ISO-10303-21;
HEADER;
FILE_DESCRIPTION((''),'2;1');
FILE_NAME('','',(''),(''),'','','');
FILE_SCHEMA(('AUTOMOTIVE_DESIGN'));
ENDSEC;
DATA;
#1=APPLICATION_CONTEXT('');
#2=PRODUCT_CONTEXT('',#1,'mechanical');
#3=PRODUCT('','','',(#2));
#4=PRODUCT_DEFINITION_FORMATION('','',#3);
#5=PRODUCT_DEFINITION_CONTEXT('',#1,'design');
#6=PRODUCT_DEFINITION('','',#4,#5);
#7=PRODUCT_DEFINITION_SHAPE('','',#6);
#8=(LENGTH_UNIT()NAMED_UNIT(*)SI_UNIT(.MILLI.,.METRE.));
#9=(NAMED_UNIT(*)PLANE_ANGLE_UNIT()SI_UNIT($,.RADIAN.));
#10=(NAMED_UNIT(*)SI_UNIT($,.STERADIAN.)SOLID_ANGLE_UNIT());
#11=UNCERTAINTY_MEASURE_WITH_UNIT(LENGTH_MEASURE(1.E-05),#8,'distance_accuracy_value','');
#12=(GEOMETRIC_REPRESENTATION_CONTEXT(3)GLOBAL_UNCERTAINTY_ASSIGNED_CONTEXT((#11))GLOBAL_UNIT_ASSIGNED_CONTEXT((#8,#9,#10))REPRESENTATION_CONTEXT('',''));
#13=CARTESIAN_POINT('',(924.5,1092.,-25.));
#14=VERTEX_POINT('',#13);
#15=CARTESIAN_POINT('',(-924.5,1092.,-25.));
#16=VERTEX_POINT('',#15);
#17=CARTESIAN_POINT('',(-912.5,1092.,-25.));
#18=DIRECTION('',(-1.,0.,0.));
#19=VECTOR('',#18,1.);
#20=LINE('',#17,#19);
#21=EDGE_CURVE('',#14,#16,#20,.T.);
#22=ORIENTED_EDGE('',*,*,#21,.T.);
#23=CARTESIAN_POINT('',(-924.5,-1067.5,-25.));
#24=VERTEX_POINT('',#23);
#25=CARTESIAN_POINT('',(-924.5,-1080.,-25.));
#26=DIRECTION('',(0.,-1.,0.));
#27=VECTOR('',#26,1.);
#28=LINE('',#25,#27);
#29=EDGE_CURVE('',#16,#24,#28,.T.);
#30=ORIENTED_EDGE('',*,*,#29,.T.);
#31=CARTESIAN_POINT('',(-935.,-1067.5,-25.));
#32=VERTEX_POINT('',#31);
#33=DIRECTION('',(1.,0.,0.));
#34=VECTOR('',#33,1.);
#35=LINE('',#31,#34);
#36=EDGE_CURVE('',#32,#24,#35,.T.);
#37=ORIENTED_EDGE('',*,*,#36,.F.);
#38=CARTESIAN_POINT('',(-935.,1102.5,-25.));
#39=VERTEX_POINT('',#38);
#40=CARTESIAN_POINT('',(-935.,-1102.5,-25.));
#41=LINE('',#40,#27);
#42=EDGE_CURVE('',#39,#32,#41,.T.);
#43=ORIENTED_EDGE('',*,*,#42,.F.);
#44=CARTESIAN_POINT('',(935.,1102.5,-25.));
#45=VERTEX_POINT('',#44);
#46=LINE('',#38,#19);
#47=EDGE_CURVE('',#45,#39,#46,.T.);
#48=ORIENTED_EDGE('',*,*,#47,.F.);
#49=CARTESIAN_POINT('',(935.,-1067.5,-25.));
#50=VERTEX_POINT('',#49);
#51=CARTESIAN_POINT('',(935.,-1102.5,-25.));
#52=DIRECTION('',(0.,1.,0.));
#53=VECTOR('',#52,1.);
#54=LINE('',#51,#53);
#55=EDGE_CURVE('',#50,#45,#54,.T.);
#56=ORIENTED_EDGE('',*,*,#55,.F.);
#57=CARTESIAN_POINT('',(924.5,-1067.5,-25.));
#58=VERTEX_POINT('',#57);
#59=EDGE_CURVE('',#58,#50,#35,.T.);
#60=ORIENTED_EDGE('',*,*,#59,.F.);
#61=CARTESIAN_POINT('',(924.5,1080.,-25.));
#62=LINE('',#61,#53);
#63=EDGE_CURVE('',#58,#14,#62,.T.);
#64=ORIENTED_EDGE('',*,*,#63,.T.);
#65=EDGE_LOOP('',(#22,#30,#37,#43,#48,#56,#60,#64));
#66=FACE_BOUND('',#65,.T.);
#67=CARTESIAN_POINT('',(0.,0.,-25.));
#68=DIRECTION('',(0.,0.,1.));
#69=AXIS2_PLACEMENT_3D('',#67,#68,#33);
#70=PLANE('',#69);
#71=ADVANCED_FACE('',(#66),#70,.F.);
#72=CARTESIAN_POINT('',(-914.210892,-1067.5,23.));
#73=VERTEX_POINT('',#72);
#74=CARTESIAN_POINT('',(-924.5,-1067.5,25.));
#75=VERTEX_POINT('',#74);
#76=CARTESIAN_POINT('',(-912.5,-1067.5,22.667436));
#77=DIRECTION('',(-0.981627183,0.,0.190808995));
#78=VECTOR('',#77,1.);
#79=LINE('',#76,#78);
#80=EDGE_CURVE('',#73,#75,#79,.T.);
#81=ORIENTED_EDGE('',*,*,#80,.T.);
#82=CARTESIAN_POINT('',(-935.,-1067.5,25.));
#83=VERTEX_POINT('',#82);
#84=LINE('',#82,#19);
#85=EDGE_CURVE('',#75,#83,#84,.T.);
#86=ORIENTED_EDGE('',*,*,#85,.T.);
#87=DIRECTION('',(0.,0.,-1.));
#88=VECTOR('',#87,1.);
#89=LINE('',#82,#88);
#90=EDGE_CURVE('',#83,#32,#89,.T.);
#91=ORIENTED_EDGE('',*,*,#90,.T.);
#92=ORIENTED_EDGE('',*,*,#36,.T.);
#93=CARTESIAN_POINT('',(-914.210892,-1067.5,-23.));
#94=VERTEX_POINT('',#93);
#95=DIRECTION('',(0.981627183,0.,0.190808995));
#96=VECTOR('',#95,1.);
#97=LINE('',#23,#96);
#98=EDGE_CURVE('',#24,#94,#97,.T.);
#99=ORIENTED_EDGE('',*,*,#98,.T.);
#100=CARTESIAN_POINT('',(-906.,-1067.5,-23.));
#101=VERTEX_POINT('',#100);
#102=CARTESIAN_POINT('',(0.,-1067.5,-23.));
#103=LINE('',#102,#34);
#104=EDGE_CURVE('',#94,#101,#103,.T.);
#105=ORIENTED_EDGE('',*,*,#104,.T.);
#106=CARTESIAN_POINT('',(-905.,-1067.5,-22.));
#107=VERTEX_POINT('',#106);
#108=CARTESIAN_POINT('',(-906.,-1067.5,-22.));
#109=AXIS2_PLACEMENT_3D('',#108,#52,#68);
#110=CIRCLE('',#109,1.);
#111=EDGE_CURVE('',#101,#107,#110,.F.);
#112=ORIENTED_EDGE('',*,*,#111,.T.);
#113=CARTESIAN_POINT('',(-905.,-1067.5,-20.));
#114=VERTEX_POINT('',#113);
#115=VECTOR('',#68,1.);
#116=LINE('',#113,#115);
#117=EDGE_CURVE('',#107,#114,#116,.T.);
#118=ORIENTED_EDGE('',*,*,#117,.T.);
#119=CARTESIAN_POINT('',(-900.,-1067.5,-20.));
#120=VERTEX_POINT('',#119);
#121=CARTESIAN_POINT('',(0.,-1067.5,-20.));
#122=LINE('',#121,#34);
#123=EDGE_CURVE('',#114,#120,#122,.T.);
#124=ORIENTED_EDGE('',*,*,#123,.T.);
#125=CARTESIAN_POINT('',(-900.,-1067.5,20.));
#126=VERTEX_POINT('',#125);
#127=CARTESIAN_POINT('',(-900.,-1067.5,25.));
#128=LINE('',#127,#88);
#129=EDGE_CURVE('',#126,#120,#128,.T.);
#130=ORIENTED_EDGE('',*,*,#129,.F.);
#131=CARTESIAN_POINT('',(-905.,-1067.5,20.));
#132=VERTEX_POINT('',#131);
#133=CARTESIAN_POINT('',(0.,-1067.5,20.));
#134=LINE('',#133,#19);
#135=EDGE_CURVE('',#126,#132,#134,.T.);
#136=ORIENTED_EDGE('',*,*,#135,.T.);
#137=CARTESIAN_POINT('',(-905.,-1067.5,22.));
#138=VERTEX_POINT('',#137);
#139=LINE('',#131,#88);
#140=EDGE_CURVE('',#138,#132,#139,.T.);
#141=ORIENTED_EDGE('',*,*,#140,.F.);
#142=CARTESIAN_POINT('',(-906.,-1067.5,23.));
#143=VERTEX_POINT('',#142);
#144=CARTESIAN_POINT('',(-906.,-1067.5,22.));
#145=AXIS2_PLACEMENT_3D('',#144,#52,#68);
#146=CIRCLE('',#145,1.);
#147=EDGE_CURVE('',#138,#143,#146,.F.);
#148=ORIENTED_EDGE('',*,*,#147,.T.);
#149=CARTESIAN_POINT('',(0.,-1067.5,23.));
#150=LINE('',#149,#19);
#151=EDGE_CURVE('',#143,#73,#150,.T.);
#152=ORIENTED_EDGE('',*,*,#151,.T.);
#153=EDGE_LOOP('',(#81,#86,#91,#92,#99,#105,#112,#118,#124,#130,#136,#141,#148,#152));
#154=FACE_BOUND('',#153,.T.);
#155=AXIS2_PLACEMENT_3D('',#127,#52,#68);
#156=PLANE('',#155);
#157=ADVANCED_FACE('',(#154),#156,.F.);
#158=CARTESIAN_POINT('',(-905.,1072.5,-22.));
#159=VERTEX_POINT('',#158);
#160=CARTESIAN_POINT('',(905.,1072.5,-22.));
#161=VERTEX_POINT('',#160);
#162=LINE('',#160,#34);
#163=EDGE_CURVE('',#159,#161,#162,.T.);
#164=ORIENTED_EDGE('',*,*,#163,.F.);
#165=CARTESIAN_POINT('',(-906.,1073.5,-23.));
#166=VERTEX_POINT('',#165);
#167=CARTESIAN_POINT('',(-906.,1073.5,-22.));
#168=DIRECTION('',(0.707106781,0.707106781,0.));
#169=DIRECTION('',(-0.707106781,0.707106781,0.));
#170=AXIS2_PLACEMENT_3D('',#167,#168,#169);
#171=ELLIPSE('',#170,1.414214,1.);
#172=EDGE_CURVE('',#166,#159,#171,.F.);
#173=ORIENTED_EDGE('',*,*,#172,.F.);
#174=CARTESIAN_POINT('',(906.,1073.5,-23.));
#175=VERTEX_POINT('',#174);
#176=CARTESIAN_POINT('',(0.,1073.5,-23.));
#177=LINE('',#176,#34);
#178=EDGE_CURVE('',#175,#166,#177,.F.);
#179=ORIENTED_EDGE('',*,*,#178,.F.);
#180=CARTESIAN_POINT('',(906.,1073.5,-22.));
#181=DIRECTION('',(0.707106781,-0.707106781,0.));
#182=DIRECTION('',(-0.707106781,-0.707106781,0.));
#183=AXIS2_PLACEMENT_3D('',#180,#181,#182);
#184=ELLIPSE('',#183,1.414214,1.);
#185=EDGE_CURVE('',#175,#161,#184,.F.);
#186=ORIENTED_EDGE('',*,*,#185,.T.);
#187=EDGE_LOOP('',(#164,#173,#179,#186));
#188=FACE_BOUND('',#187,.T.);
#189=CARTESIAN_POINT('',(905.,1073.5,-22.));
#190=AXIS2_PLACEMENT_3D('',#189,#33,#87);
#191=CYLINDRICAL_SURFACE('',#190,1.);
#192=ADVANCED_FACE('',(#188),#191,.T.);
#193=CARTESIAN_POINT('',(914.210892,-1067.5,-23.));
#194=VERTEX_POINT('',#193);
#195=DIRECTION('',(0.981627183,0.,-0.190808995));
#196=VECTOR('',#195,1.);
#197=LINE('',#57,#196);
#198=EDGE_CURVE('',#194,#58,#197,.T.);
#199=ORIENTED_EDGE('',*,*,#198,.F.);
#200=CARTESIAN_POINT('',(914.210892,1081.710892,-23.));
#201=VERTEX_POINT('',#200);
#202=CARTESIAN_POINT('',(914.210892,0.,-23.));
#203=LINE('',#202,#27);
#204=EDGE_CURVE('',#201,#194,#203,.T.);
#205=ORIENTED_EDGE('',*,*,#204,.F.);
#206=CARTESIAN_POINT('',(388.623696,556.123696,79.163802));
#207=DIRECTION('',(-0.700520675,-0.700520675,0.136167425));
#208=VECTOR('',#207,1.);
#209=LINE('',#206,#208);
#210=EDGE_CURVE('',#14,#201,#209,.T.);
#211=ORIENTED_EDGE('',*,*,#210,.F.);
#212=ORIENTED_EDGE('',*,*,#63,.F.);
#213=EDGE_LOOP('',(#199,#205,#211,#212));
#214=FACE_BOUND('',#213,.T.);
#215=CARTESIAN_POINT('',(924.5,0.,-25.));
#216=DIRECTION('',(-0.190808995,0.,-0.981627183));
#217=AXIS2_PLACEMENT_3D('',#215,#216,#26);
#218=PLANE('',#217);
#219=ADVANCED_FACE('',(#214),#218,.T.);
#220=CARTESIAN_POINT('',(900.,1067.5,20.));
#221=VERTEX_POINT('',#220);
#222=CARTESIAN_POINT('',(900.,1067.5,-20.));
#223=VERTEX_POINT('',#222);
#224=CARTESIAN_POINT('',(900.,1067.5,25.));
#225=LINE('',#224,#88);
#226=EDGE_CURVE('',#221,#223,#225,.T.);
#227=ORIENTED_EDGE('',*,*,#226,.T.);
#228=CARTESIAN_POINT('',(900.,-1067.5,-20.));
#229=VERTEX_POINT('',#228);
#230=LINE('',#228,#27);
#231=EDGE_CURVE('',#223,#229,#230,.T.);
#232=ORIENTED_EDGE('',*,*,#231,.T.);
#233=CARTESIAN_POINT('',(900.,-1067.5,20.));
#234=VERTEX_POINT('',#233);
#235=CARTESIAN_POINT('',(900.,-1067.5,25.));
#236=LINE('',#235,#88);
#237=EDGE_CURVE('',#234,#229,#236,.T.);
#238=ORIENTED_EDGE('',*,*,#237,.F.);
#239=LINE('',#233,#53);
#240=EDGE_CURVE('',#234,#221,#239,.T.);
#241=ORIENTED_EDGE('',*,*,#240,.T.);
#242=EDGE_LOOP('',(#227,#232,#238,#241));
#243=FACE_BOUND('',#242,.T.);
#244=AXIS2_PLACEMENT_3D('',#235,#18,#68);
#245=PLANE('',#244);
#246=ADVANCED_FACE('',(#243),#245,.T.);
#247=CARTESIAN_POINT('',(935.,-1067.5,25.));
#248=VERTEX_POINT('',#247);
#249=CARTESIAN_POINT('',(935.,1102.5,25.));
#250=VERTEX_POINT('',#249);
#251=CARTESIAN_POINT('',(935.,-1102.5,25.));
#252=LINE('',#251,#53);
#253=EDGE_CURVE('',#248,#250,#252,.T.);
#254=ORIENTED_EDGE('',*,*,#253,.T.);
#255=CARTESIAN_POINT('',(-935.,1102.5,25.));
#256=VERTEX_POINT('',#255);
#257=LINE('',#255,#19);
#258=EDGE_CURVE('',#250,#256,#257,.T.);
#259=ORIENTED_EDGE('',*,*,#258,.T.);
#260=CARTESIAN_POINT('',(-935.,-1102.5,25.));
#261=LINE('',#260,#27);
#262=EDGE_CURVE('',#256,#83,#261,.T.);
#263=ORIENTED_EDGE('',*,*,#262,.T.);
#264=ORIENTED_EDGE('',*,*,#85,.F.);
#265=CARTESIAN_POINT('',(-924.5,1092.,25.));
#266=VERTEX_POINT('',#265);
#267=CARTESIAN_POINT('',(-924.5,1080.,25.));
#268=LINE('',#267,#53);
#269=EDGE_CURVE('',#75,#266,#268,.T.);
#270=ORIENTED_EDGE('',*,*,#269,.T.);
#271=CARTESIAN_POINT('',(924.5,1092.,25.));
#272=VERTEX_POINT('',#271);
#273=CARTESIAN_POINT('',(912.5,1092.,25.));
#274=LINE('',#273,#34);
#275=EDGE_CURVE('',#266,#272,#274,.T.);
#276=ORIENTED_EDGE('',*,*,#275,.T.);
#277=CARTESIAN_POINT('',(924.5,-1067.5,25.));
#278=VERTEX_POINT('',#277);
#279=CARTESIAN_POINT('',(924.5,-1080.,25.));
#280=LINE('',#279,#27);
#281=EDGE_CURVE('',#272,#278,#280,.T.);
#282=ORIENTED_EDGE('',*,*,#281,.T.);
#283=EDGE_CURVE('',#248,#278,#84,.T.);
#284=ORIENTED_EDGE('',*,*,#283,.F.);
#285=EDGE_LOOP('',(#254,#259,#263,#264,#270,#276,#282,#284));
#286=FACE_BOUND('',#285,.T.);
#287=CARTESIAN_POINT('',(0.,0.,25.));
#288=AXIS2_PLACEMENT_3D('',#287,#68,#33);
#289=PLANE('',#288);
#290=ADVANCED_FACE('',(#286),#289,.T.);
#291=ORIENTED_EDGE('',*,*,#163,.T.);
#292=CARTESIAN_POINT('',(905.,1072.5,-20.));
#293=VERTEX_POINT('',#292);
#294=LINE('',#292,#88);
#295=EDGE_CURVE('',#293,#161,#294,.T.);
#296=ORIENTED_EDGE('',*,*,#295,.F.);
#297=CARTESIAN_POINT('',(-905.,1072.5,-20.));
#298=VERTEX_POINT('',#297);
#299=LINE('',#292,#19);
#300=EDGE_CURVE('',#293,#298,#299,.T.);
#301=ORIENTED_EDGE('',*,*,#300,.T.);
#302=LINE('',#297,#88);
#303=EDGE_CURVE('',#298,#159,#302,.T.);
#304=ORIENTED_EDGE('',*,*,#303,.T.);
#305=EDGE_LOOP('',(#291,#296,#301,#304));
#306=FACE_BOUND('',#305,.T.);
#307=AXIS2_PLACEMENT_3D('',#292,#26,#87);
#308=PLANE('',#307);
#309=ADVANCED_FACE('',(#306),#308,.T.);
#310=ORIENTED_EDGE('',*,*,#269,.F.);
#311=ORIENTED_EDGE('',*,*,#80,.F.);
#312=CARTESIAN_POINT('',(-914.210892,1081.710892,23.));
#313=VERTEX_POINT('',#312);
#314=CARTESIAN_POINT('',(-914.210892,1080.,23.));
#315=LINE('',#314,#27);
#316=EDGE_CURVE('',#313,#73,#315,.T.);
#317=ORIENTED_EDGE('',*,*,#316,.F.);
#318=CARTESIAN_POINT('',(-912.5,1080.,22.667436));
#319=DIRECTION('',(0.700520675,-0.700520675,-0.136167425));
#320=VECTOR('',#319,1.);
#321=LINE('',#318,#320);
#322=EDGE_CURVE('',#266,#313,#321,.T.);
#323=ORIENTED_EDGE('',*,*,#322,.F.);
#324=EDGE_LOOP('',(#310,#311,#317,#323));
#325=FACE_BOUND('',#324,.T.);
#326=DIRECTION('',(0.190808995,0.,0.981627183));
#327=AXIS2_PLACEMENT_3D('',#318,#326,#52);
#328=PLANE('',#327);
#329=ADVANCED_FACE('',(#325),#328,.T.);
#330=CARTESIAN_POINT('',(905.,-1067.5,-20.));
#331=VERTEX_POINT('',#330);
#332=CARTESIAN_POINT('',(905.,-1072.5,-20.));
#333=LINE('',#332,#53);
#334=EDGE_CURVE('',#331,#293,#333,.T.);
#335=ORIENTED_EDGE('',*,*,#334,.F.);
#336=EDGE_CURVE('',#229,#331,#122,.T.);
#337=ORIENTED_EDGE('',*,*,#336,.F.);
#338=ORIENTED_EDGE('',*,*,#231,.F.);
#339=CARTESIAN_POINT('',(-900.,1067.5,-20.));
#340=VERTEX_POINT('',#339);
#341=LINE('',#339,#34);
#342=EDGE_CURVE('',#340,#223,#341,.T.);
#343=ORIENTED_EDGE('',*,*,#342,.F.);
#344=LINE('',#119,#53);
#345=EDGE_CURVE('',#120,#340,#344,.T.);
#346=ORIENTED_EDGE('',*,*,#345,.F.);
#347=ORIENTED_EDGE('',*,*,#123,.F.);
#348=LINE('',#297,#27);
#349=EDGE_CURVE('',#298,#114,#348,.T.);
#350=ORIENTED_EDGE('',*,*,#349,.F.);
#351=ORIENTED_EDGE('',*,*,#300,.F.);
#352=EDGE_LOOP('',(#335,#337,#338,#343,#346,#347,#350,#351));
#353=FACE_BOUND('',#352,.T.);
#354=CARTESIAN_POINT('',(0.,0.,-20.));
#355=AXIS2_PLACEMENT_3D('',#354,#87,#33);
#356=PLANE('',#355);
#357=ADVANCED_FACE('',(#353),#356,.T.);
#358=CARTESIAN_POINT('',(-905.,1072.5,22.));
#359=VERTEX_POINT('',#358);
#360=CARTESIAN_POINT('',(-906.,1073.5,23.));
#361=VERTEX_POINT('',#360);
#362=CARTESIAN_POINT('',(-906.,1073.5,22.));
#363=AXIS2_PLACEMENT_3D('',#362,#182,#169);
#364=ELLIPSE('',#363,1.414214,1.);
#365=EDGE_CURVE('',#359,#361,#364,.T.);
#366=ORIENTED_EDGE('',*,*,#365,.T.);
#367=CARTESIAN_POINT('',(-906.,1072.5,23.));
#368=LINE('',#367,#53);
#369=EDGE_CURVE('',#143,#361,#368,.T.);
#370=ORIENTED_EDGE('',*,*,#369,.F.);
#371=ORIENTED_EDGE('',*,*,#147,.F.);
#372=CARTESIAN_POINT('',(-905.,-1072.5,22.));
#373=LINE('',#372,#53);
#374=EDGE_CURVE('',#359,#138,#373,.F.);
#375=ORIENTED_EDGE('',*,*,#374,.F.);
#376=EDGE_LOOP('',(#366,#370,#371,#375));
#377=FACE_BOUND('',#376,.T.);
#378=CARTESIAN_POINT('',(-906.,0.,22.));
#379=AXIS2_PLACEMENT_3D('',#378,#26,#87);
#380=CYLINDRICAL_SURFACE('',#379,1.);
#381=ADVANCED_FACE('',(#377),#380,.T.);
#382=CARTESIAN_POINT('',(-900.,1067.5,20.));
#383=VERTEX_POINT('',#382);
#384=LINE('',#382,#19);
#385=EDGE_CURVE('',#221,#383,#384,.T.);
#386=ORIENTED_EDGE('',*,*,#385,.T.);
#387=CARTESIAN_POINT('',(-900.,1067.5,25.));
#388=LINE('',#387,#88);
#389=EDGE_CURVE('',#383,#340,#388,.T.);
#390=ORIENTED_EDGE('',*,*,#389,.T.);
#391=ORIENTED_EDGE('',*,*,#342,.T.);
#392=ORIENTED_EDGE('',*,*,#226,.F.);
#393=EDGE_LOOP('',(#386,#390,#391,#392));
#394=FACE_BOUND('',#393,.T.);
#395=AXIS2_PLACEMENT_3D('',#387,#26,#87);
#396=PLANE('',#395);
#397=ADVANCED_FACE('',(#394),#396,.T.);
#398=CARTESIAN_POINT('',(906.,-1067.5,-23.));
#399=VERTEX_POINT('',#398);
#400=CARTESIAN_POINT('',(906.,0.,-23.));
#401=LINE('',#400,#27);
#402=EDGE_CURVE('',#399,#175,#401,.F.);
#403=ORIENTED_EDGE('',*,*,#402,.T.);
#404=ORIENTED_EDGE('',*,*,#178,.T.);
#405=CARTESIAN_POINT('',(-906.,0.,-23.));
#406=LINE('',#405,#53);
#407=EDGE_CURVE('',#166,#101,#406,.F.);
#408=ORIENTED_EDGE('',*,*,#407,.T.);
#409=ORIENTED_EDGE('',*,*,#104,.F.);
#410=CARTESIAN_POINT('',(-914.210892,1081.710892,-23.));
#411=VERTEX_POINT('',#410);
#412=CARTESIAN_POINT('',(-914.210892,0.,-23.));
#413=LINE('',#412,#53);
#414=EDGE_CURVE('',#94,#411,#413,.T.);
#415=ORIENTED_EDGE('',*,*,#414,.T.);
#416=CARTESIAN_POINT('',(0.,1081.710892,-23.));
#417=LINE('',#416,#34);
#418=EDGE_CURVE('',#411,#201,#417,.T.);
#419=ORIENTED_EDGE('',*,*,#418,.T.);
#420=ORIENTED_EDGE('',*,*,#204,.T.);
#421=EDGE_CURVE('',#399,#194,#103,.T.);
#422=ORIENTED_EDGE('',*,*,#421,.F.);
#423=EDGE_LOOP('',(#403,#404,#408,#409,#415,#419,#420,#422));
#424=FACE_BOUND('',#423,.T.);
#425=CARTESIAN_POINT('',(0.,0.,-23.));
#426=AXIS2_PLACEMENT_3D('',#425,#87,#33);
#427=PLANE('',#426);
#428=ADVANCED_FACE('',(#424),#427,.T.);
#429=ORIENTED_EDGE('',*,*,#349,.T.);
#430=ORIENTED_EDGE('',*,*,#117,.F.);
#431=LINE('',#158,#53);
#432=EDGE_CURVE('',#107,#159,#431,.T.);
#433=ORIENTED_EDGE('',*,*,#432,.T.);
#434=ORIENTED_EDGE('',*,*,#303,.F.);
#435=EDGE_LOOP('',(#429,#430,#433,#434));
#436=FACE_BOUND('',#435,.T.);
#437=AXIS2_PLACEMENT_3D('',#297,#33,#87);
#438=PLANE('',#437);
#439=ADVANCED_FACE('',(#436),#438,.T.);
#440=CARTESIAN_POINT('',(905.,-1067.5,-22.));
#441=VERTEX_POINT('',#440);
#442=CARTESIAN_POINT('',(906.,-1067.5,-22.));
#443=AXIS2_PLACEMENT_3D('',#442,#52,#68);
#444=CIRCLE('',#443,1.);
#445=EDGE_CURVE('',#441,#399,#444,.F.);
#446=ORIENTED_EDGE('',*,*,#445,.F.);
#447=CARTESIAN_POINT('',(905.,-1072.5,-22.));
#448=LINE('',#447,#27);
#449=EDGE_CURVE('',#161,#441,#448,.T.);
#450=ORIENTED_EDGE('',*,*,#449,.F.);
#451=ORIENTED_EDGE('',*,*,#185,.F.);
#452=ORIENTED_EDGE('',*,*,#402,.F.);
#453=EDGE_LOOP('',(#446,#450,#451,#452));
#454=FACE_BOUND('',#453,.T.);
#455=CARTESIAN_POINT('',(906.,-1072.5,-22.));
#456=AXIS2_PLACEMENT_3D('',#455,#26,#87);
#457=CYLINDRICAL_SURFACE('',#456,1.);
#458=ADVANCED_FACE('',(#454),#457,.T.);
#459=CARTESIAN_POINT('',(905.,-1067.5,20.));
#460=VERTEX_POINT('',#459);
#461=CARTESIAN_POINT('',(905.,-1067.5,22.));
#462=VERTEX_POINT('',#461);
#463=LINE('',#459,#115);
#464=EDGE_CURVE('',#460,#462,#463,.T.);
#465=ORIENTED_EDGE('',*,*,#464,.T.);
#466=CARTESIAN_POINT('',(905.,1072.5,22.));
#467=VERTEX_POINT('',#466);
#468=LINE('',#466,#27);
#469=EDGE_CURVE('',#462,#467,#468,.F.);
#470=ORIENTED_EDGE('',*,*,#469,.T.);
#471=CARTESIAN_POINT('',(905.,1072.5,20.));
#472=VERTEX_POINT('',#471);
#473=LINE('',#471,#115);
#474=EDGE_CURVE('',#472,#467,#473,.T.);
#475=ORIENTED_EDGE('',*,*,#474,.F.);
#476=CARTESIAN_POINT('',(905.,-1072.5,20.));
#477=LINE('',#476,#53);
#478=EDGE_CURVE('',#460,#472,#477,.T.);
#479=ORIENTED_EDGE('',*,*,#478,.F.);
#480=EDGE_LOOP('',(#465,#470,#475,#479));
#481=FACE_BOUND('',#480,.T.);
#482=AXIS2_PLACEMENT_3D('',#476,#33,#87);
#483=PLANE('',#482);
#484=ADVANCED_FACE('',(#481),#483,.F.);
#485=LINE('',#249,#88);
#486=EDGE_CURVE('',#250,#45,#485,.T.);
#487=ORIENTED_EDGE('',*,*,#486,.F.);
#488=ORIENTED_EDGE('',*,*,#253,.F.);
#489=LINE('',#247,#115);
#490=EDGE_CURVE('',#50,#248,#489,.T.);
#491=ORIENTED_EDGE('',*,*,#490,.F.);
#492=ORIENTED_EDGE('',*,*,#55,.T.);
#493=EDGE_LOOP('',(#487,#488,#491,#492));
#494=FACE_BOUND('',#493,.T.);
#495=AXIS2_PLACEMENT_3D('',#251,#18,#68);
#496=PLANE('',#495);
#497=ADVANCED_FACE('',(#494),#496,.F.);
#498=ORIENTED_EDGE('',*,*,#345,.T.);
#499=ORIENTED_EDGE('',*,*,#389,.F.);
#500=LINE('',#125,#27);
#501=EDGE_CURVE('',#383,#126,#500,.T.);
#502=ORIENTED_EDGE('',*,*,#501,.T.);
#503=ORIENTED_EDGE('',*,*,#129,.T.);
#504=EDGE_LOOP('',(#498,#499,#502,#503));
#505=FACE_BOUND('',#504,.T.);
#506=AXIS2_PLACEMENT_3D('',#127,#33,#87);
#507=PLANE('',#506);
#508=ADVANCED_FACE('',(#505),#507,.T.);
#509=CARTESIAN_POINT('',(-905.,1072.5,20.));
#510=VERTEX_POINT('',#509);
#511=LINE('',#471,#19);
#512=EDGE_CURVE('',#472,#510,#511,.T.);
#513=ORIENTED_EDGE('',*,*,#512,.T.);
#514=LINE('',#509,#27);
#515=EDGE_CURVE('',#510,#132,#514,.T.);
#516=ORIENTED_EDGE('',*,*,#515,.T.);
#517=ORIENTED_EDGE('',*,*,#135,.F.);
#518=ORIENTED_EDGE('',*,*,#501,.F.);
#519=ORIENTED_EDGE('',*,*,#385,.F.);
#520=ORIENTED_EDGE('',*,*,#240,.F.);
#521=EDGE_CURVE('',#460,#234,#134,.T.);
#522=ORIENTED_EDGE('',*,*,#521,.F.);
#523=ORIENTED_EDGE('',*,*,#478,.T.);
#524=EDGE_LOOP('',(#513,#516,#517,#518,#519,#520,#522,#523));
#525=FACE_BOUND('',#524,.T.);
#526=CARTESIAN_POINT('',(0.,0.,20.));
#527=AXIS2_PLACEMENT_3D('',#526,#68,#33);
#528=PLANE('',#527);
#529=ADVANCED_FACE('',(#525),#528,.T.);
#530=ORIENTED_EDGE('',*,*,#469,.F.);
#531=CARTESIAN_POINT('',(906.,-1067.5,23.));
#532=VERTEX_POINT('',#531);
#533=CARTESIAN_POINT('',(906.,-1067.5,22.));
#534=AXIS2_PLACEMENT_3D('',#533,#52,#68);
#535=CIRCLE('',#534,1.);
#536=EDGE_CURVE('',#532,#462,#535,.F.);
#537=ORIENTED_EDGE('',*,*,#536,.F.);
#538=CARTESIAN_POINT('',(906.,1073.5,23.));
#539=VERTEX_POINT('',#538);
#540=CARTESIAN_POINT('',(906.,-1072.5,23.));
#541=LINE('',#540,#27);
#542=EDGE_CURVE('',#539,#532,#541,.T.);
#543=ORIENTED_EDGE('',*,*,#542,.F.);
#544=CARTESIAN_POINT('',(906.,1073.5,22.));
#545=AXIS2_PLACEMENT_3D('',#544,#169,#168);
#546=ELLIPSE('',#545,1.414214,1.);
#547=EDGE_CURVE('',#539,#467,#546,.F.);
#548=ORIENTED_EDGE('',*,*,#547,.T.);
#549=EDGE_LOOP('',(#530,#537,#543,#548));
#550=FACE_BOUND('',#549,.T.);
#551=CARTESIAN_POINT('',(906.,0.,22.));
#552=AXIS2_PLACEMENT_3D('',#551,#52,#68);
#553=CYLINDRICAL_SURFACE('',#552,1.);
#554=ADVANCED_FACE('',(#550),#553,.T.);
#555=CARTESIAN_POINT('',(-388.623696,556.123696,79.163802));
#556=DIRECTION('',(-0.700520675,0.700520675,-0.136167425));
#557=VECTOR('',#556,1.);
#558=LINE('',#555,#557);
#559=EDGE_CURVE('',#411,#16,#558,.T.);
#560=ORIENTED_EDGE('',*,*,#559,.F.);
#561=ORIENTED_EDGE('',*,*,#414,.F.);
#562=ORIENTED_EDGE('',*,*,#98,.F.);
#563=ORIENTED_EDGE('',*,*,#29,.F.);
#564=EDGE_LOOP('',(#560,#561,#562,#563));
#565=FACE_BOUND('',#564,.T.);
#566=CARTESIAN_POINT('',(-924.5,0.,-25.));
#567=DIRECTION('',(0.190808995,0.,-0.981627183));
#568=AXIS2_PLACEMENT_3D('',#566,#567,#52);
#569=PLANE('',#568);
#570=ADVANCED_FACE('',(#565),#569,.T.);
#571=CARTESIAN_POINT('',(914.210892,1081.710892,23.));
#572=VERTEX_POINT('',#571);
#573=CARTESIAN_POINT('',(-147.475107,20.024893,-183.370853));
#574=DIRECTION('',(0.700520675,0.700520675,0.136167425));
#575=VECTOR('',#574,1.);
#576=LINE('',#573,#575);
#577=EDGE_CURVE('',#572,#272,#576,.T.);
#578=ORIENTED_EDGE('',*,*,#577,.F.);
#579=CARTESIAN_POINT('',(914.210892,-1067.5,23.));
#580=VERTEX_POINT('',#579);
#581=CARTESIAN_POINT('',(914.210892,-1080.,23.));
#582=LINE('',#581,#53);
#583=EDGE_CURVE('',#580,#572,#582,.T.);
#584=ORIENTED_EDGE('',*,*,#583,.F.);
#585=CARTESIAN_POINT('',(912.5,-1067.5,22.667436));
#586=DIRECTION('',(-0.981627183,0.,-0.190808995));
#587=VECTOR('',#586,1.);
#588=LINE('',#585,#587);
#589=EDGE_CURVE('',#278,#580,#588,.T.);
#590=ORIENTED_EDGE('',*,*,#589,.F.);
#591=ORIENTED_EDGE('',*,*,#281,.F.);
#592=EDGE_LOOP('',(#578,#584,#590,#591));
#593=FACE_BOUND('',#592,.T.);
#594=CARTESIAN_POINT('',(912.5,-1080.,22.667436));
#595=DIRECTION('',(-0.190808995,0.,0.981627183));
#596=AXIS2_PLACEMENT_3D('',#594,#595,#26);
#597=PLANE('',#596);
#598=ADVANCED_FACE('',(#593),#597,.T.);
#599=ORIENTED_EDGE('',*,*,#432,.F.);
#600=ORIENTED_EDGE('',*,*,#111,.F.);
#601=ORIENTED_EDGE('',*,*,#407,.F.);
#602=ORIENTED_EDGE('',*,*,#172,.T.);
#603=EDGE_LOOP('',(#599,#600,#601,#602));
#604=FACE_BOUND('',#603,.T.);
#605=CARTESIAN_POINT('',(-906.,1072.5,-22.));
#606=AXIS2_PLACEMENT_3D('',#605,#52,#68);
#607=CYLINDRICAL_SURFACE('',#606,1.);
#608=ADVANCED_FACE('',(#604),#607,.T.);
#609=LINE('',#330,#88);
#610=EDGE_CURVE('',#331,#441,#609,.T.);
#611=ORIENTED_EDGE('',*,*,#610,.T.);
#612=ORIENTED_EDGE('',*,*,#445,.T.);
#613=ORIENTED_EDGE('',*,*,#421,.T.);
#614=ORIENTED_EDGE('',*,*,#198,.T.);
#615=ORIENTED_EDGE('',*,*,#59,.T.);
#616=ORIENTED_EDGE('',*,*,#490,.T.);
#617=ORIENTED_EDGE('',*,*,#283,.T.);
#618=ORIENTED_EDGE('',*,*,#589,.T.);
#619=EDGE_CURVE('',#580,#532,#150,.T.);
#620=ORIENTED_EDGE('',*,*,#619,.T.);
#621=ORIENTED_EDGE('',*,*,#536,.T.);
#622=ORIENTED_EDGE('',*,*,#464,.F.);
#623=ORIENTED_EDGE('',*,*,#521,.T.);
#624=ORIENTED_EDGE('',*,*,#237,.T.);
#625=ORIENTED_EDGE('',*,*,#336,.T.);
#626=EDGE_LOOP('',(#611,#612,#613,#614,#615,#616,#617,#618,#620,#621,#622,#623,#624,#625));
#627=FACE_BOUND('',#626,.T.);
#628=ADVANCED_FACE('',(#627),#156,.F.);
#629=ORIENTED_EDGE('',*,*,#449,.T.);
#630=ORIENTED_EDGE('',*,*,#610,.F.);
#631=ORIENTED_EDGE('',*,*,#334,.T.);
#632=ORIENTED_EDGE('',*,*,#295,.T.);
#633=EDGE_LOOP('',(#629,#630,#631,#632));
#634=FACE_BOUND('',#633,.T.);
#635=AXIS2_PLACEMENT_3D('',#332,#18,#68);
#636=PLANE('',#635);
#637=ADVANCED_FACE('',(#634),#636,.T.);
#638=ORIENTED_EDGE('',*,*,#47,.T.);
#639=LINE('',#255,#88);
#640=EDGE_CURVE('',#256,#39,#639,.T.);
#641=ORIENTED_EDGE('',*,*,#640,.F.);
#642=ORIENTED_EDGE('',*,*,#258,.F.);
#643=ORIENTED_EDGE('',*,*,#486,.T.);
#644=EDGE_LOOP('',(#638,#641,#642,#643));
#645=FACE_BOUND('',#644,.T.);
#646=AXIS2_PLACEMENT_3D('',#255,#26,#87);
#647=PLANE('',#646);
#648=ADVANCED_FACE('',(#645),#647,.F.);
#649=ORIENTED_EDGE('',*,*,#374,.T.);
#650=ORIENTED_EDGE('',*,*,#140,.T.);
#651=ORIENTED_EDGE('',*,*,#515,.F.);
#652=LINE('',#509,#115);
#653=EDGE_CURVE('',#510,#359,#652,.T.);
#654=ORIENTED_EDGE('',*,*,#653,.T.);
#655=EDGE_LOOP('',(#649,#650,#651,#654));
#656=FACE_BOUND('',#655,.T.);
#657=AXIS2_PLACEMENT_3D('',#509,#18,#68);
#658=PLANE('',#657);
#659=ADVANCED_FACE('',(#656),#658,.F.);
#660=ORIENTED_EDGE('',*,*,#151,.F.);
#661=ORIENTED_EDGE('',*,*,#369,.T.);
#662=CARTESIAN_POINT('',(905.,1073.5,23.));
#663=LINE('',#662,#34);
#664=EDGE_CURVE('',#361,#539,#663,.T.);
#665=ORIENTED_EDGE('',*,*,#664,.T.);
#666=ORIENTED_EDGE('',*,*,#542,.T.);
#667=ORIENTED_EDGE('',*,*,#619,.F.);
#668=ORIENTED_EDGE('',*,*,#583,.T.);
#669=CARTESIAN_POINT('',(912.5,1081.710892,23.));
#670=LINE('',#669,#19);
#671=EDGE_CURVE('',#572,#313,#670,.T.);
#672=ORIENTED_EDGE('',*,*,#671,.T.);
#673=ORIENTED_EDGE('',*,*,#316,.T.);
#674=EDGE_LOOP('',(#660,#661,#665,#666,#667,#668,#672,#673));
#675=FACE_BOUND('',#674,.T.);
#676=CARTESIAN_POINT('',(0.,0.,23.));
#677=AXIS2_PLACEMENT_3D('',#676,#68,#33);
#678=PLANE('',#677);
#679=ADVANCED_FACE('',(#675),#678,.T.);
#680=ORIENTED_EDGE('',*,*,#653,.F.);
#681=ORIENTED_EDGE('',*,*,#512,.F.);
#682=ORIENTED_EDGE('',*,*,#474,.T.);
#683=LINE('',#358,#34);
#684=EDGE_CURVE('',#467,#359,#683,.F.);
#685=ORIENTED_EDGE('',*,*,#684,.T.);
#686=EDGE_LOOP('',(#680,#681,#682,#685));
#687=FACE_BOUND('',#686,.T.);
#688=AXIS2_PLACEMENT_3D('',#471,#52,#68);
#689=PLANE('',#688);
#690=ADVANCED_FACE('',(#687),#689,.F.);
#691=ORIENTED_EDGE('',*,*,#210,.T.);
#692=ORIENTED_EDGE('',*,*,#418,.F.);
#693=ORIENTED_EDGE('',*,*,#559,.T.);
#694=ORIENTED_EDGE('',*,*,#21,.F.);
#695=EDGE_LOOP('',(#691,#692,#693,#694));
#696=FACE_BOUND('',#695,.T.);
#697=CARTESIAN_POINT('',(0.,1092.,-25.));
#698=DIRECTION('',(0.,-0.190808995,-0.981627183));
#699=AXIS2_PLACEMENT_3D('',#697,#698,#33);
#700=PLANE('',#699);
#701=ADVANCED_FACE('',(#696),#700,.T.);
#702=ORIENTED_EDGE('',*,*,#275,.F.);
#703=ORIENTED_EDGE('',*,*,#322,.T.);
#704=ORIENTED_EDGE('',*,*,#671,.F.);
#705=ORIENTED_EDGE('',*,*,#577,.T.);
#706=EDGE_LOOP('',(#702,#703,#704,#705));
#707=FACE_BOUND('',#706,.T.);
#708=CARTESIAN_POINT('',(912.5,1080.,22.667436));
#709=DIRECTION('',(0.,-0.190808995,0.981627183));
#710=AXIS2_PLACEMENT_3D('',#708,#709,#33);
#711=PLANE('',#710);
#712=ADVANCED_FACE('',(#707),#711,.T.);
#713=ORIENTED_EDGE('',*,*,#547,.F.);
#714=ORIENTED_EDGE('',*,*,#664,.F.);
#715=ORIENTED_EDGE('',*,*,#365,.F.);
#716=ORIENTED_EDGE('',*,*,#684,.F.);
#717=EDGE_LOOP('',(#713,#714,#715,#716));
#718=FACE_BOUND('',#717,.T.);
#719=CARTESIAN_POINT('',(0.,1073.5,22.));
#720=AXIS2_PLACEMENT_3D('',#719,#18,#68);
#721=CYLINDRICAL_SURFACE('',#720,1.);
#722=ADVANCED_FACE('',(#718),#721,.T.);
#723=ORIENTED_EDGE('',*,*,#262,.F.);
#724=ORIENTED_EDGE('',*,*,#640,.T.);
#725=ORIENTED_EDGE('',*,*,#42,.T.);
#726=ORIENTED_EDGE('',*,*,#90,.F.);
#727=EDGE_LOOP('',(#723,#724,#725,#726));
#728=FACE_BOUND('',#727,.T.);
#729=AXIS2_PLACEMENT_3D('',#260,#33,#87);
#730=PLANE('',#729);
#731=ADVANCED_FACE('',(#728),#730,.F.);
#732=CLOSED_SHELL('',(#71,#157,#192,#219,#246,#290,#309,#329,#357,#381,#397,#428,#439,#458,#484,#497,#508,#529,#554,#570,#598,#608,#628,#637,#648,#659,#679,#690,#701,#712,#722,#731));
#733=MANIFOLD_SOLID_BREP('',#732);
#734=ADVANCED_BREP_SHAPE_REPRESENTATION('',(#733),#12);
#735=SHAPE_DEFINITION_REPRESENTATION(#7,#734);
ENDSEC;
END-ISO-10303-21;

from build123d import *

# Parameters (mm, degrees)
SKETCH1_W           = 1870
SKETCH1_H           = 2205
SKETCH1_W_2         = 1800
SKETCH1_H_2         = 2135
BOSS_EXTRUDE1_DEPTH = 25
SKETCH2_W           = 1810
SKETCH2_H           = 2145
CUT_EXTRUDE2_DEPTH  = 5
SKETCH3_W           = 1825
SKETCH3_H           = 2160
CUT_EXTRUDE4_DEPTH  = 2
FILLET1_R           = 1
CHAMFER1_SIZE       = 2.33256371
CHAMFER1_SIZE_2     = 12
FILLET2_R           = 1
CHAMFER2_SIZE       = 2.33256371
CHAMFER2_SIZE_2     = 12
SKETCH5_W           = 1870
SKETCH5_H           = 50
CUT_EXTRUDE5_DEPTH  = 35


with BuildPart() as part:
    # Sketch1 → Boss-Extrude1 (new, symmetric)
    with BuildSketch(Plane.XY):
        Rectangle(SKETCH1_W, SKETCH1_H)
        Rectangle(SKETCH1_W_2, SKETCH1_H_2, mode=Mode.SUBTRACT)
    extrude(amount=BOSS_EXTRUDE1_DEPTH, both=True)

    # Sketch2 → Cut-Extrude2 (cut)
    with BuildSketch(Plane.XY.offset(25)):
        Rectangle(SKETCH2_W, SKETCH2_H)
    cut_extrude2 = extrude(amount=-CUT_EXTRUDE2_DEPTH, mode=Mode.SUBTRACT)

    # Sketch3 → Cut-Extrude4 (cut)
    with BuildSketch(Plane.XY.offset(25)):
        Rectangle(SKETCH3_W, SKETCH3_H)
    cut_extrude4 = extrude(amount=-CUT_EXTRUDE4_DEPTH, mode=Mode.SUBTRACT)

    # Fillet1
    fillet1_edges = [part.edges().sort_by_distance(p)[0] for p in [
        (0, -1072.5, 23),
        (-905, 0, 23),
        (0, 1072.5, 23),
        (905, 0, 23),
    ]]
    fillet(fillet1_edges, radius=FILLET1_R)

    # Chamfer1
    # the kernel refuses this chamfer: 12, 2.33256371 mm, written as the material it takes off along each edge
    with BuildSketch(Plane(origin=(912.5, 1080, 25), x_dir=(0, -0.1907987049962236, -0.9816291836389973), z_dir=(-1, 0, 0))) as chamfer1_piece_1_section:
        Polygon((CHAMFER1_SIZE * 0.981629183493, -CHAMFER1_SIZE * 0.190798704968), (-CHAMFER1_SIZE_2 * 0.190798704996, -CHAMFER1_SIZE_2 * 0.981629183639), (0, 0), align=None)
    chamfer1_piece_1 = extrude(amount=1825, mode=Mode.PRIVATE)
    chamfer1_piece_1 = split(chamfer1_piece_1, bisect_by=Plane(origin=(0, 1084.39239505, 23), z_dir=(0, 0, 1)), keep=Keep.TOP, mode=Mode.PRIVATE)
    add(chamfer1_piece_1, mode=Mode.SUBTRACT)
    with BuildSketch(Plane(origin=(912.5, -1080, 25), x_dir=(-0.1907987049962236, 0, -0.9816291836389973), z_dir=(0, 1, 0))) as chamfer1_piece_2_section:
        Polygon((CHAMFER1_SIZE * 0.981629183493, -CHAMFER1_SIZE * 0.190798704968), (-CHAMFER1_SIZE_2 * 0.190798704996, -CHAMFER1_SIZE_2 * 0.981629183639), (0, 0), align=None)
    chamfer1_piece_2 = extrude(amount=2160, mode=Mode.PRIVATE)
    chamfer1_piece_2 = split(chamfer1_piece_2, bisect_by=Plane(origin=(916.89239505, 0, 23), z_dir=(0, 0, 1)), keep=Keep.TOP, mode=Mode.PRIVATE)
    add(chamfer1_piece_2, mode=Mode.SUBTRACT)
    with BuildSketch(Plane(origin=(-912.5, -1080, 25), x_dir=(0, 0.1907987049962236, -0.9816291836389973), z_dir=(1, 0, 0))) as chamfer1_piece_3_section:
        Polygon((CHAMFER1_SIZE * 0.981629183493, -CHAMFER1_SIZE * 0.190798704968), (-CHAMFER1_SIZE_2 * 0.190798704996, -CHAMFER1_SIZE_2 * 0.981629183639), (0, 0), align=None)
    chamfer1_piece_3 = extrude(amount=1825, mode=Mode.PRIVATE)
    chamfer1_piece_3 = split(chamfer1_piece_3, bisect_by=Plane(origin=(0, -1084.39239505, 23), z_dir=(0, 0, 1)), keep=Keep.TOP, mode=Mode.PRIVATE)
    add(chamfer1_piece_3, mode=Mode.SUBTRACT)
    with BuildSketch(Plane(origin=(-912.5, 1080, 25), x_dir=(0.1907987049962236, 0, -0.9816291836389973), z_dir=(0, -1, 0))) as chamfer1_piece_4_section:
        Polygon((CHAMFER1_SIZE * 0.981629183493, -CHAMFER1_SIZE * 0.190798704968), (-CHAMFER1_SIZE_2 * 0.190798704996, -CHAMFER1_SIZE_2 * 0.981629183639), (0, 0), align=None)
    chamfer1_piece_4 = extrude(amount=2160, mode=Mode.PRIVATE)
    chamfer1_piece_4 = split(chamfer1_piece_4, bisect_by=Plane(origin=(-916.89239505, 0, 23), z_dir=(0, 0, 1)), keep=Keep.TOP, mode=Mode.PRIVATE)
    add(chamfer1_piece_4, mode=Mode.SUBTRACT)
    with BuildSketch(Plane(origin=(912.5, -1080, 25), x_dir=(-0.1907987049962236, 0, -0.9816291836389973), z_dir=(0, 1, 0))) as chamfer1_piece_5a_section:
        Polygon((CHAMFER1_SIZE * 0.981629183493, -CHAMFER1_SIZE * 0.190798704968), (-CHAMFER1_SIZE_2 * 0.190798704996, -CHAMFER1_SIZE_2 * 0.981629183639), (0, 0), align=None)
    chamfer1_piece_5a = extrude(amount=2191.178793389, mode=Mode.PRIVATE)
    chamfer1_piece_5a = split(chamfer1_piece_5a, bisect_by=Plane(origin=(916.89239505, 1095.589396695, 23), z_dir=(0, 0, 1)), keep=Keep.TOP, mode=Mode.PRIVATE)
    chamfer1_piece_5a = split(chamfer1_piece_5a, bisect_by=Plane(origin=(916.89239505, 1080, 24.399204817), z_dir=(0, 1, 0)), keep=Keep.TOP, mode=Mode.PRIVATE)
    with BuildSketch(Plane(origin=(943.678793389, 1080, 25), x_dir=(0, -0.1907987049962236, -0.9816291836389973), z_dir=(-1, 0, 0))) as chamfer1_piece_5b_section:
        Polygon((CHAMFER1_SIZE * 0.981629183493, -CHAMFER1_SIZE * 0.190798704968), (-CHAMFER1_SIZE_2 * 0.190798704996, -CHAMFER1_SIZE_2 * 0.981629183639), (0, 0), align=None)
    chamfer1_piece_5b = extrude(amount=1856.178793389, mode=Mode.PRIVATE)
    chamfer1_piece_5b = split(chamfer1_piece_5b, bisect_by=Plane(origin=(928.089396695, 1084.39239505, 23), z_dir=(0, 0, 1)), keep=Keep.TOP, mode=Mode.PRIVATE)
    chamfer1_piece_5b = split(chamfer1_piece_5b, bisect_by=Plane(origin=(912.5, 1084.39239505, 24.399204817), z_dir=(1, 0, 0)), keep=Keep.TOP, mode=Mode.PRIVATE)
    chamfer1_piece_5 = chamfer1_piece_5a & chamfer1_piece_5b
    add(chamfer1_piece_5, mode=Mode.SUBTRACT)
    with BuildSketch(Plane(origin=(912.5, 1080, 25), x_dir=(0, -0.1907987049962236, -0.9816291836389973), z_dir=(-1, 0, 0))) as chamfer1_piece_6a_section:
        Polygon((CHAMFER1_SIZE * 0.981629183493, -CHAMFER1_SIZE * 0.190798704968), (-CHAMFER1_SIZE_2 * 0.190798704996, -CHAMFER1_SIZE_2 * 0.981629183639), (0, 0), align=None)
    chamfer1_piece_6a = extrude(amount=1856.178793389, mode=Mode.PRIVATE)
    chamfer1_piece_6a = split(chamfer1_piece_6a, bisect_by=Plane(origin=(-928.089396695, 1084.39239505, 23), z_dir=(0, 0, 1)), keep=Keep.TOP, mode=Mode.PRIVATE)
    chamfer1_piece_6a = split(chamfer1_piece_6a, bisect_by=Plane(origin=(-912.5, 1084.39239505, 24.399204817), z_dir=(-1, 0, 0)), keep=Keep.TOP, mode=Mode.PRIVATE)
    with BuildSketch(Plane(origin=(-912.5, 1111.178793389, 25), x_dir=(0.1907987049962236, 0, -0.9816291836389973), z_dir=(0, -1, 0))) as chamfer1_piece_6b_section:
        Polygon((CHAMFER1_SIZE * 0.981629183493, -CHAMFER1_SIZE * 0.190798704968), (-CHAMFER1_SIZE_2 * 0.190798704996, -CHAMFER1_SIZE_2 * 0.981629183639), (0, 0), align=None)
    chamfer1_piece_6b = extrude(amount=2191.178793389, mode=Mode.PRIVATE)
    chamfer1_piece_6b = split(chamfer1_piece_6b, bisect_by=Plane(origin=(-916.89239505, 1095.589396695, 23), z_dir=(0, 0, 1)), keep=Keep.TOP, mode=Mode.PRIVATE)
    chamfer1_piece_6b = split(chamfer1_piece_6b, bisect_by=Plane(origin=(-916.89239505, 1080, 24.399204817), z_dir=(0, 1, 0)), keep=Keep.TOP, mode=Mode.PRIVATE)
    chamfer1_piece_6 = chamfer1_piece_6a & chamfer1_piece_6b
    add(chamfer1_piece_6, mode=Mode.SUBTRACT)
    with BuildSketch(Plane(origin=(912.5, -1111.178793389, 25), x_dir=(-0.1907987049962236, 0, -0.9816291836389973), z_dir=(0, 1, 0))) as chamfer1_piece_7a_section:
        Polygon((CHAMFER1_SIZE * 0.981629183493, -CHAMFER1_SIZE * 0.190798704968), (-CHAMFER1_SIZE_2 * 0.190798704996, -CHAMFER1_SIZE_2 * 0.981629183639), (0, 0), align=None)
    chamfer1_piece_7a = extrude(amount=2191.178793389, mode=Mode.PRIVATE)
    chamfer1_piece_7a = split(chamfer1_piece_7a, bisect_by=Plane(origin=(916.89239505, -1095.589396695, 23), z_dir=(0, 0, 1)), keep=Keep.TOP, mode=Mode.PRIVATE)
    chamfer1_piece_7a = split(chamfer1_piece_7a, bisect_by=Plane(origin=(916.89239505, -1080, 24.399204817), z_dir=(0, -1, 0)), keep=Keep.TOP, mode=Mode.PRIVATE)
    with BuildSketch(Plane(origin=(-912.5, -1080, 25), x_dir=(0, 0.1907987049962236, -0.9816291836389973), z_dir=(1, 0, 0))) as chamfer1_piece_7b_section:
        Polygon((CHAMFER1_SIZE * 0.981629183493, -CHAMFER1_SIZE * 0.190798704968), (-CHAMFER1_SIZE_2 * 0.190798704996, -CHAMFER1_SIZE_2 * 0.981629183639), (0, 0), align=None)
    chamfer1_piece_7b = extrude(amount=1856.178793389, mode=Mode.PRIVATE)
    chamfer1_piece_7b = split(chamfer1_piece_7b, bisect_by=Plane(origin=(928.089396695, -1084.39239505, 23), z_dir=(0, 0, 1)), keep=Keep.TOP, mode=Mode.PRIVATE)
    chamfer1_piece_7b = split(chamfer1_piece_7b, bisect_by=Plane(origin=(912.5, -1084.39239505, 24.399204817), z_dir=(1, 0, 0)), keep=Keep.TOP, mode=Mode.PRIVATE)
    chamfer1_piece_7 = chamfer1_piece_7a & chamfer1_piece_7b
    add(chamfer1_piece_7, mode=Mode.SUBTRACT)
    with BuildSketch(Plane(origin=(-943.678793389, -1080, 25), x_dir=(0, 0.1907987049962236, -0.9816291836389973), z_dir=(1, 0, 0))) as chamfer1_piece_8a_section:
        Polygon((CHAMFER1_SIZE * 0.981629183493, -CHAMFER1_SIZE * 0.190798704968), (-CHAMFER1_SIZE_2 * 0.190798704996, -CHAMFER1_SIZE_2 * 0.981629183639), (0, 0), align=None)
    chamfer1_piece_8a = extrude(amount=1856.178793389, mode=Mode.PRIVATE)
    chamfer1_piece_8a = split(chamfer1_piece_8a, bisect_by=Plane(origin=(-928.089396695, -1084.39239505, 23), z_dir=(0, 0, 1)), keep=Keep.TOP, mode=Mode.PRIVATE)
    chamfer1_piece_8a = split(chamfer1_piece_8a, bisect_by=Plane(origin=(-912.5, -1084.39239505, 24.399204817), z_dir=(-1, 0, 0)), keep=Keep.TOP, mode=Mode.PRIVATE)
    with BuildSketch(Plane(origin=(-912.5, 1080, 25), x_dir=(0.1907987049962236, 0, -0.9816291836389973), z_dir=(0, -1, 0))) as chamfer1_piece_8b_section:
        Polygon((CHAMFER1_SIZE * 0.981629183493, -CHAMFER1_SIZE * 0.190798704968), (-CHAMFER1_SIZE_2 * 0.190798704996, -CHAMFER1_SIZE_2 * 0.981629183639), (0, 0), align=None)
    chamfer1_piece_8b = extrude(amount=2191.178793389, mode=Mode.PRIVATE)
    chamfer1_piece_8b = split(chamfer1_piece_8b, bisect_by=Plane(origin=(-916.89239505, -1095.589396695, 23), z_dir=(0, 0, 1)), keep=Keep.TOP, mode=Mode.PRIVATE)
    chamfer1_piece_8b = split(chamfer1_piece_8b, bisect_by=Plane(origin=(-916.89239505, -1080, 24.399204817), z_dir=(0, -1, 0)), keep=Keep.TOP, mode=Mode.PRIVATE)
    chamfer1_piece_8 = chamfer1_piece_8a & chamfer1_piece_8b
    add(chamfer1_piece_8, mode=Mode.SUBTRACT)

    # Mirror1: Cut-Extrude2, Cut-Extrude4 across plane
    add(cut_extrude2.mirror(Plane.XY), mode=Mode.SUBTRACT)
    add(cut_extrude4.mirror(Plane.XY), mode=Mode.SUBTRACT)

    # Fillet2
    fillet2_edges = [part.edges().sort_by_distance(p)[0] for p in [
        (0, 1072.5, -23),
        (0, -1072.5, -23),
        (-905, 0, -23),
        (905, 0, -23),
    ]]
    fillet(fillet2_edges, radius=FILLET2_R)

    # Chamfer2
    # the kernel refuses this chamfer: 12, 2.33256371 mm, written as the material it takes off along each edge
    with BuildSketch(Plane(origin=(912.5, 1080, -25), x_dir=(0, -0.1907987049962236, 0.9816291836389973), z_dir=(-1, 0, 0))) as chamfer2_piece_1_section:
        Polygon((CHAMFER2_SIZE * 0.981629183493, CHAMFER2_SIZE * 0.190798704968), (-CHAMFER2_SIZE_2 * 0.190798704996, CHAMFER2_SIZE_2 * 0.981629183639), (0, 0), align=None)
    chamfer2_piece_1 = extrude(amount=1825, mode=Mode.PRIVATE)
    chamfer2_piece_1 = split(chamfer2_piece_1, bisect_by=Plane(origin=(0, 1084.39239505, -23), z_dir=(0, 0, -1)), keep=Keep.TOP, mode=Mode.PRIVATE)
    add(chamfer2_piece_1, mode=Mode.SUBTRACT)
    with BuildSketch(Plane(origin=(912.5, -1080, -25), x_dir=(-0.1907987049962236, 0, 0.9816291836389973), z_dir=(0, 1, 0))) as chamfer2_piece_2_section:
        Polygon((CHAMFER2_SIZE * 0.981629183493, CHAMFER2_SIZE * 0.190798704968), (-CHAMFER2_SIZE_2 * 0.190798704996, CHAMFER2_SIZE_2 * 0.981629183639), (0, 0), align=None)
    chamfer2_piece_2 = extrude(amount=2160, mode=Mode.PRIVATE)
    chamfer2_piece_2 = split(chamfer2_piece_2, bisect_by=Plane(origin=(916.89239505, 0, -23), z_dir=(0, 0, -1)), keep=Keep.TOP, mode=Mode.PRIVATE)
    add(chamfer2_piece_2, mode=Mode.SUBTRACT)
    with BuildSketch(Plane(origin=(-912.5, 1080, -25), x_dir=(0.1907987049962236, 0, 0.9816291836389973), z_dir=(0, -1, 0))) as chamfer2_piece_3_section:
        Polygon((CHAMFER2_SIZE * 0.981629183493, CHAMFER2_SIZE * 0.190798704968), (-CHAMFER2_SIZE_2 * 0.190798704996, CHAMFER2_SIZE_2 * 0.981629183639), (0, 0), align=None)
    chamfer2_piece_3 = extrude(amount=2160, mode=Mode.PRIVATE)
    chamfer2_piece_3 = split(chamfer2_piece_3, bisect_by=Plane(origin=(-916.89239505, 0, -23), z_dir=(0, 0, -1)), keep=Keep.TOP, mode=Mode.PRIVATE)
    add(chamfer2_piece_3, mode=Mode.SUBTRACT)
    with BuildSketch(Plane(origin=(-912.5, -1080, -25), x_dir=(0, 0.1907987049962236, 0.9816291836389973), z_dir=(1, 0, 0))) as chamfer2_piece_4_section:
        Polygon((CHAMFER2_SIZE * 0.981629183493, CHAMFER2_SIZE * 0.190798704968), (-CHAMFER2_SIZE_2 * 0.190798704996, CHAMFER2_SIZE_2 * 0.981629183639), (0, 0), align=None)
    chamfer2_piece_4 = extrude(amount=1825, mode=Mode.PRIVATE)
    chamfer2_piece_4 = split(chamfer2_piece_4, bisect_by=Plane(origin=(0, -1084.39239505, -23), z_dir=(0, 0, -1)), keep=Keep.TOP, mode=Mode.PRIVATE)
    add(chamfer2_piece_4, mode=Mode.SUBTRACT)
    with BuildSketch(Plane(origin=(912.5, -1080, -25), x_dir=(-0.1907987049962236, 0, 0.9816291836389973), z_dir=(0, 1, 0))) as chamfer2_piece_5a_section:
        Polygon((CHAMFER2_SIZE * 0.981629183493, CHAMFER2_SIZE * 0.190798704968), (-CHAMFER2_SIZE_2 * 0.190798704996, CHAMFER2_SIZE_2 * 0.981629183639), (0, 0), align=None)
    chamfer2_piece_5a = extrude(amount=2191.178793389, mode=Mode.PRIVATE)
    chamfer2_piece_5a = split(chamfer2_piece_5a, bisect_by=Plane(origin=(916.89239505, 1095.589396695, -23), z_dir=(0, 0, -1)), keep=Keep.TOP, mode=Mode.PRIVATE)
    chamfer2_piece_5a = split(chamfer2_piece_5a, bisect_by=Plane(origin=(916.89239505, 1080, -24.399204817), z_dir=(0, 1, 0)), keep=Keep.TOP, mode=Mode.PRIVATE)
    with BuildSketch(Plane(origin=(943.678793389, 1080, -25), x_dir=(0, -0.1907987049962236, 0.9816291836389973), z_dir=(-1, 0, 0))) as chamfer2_piece_5b_section:
        Polygon((CHAMFER2_SIZE * 0.981629183493, CHAMFER2_SIZE * 0.190798704968), (-CHAMFER2_SIZE_2 * 0.190798704996, CHAMFER2_SIZE_2 * 0.981629183639), (0, 0), align=None)
    chamfer2_piece_5b = extrude(amount=1856.178793389, mode=Mode.PRIVATE)
    chamfer2_piece_5b = split(chamfer2_piece_5b, bisect_by=Plane(origin=(928.089396695, 1084.39239505, -23), z_dir=(0, 0, -1)), keep=Keep.TOP, mode=Mode.PRIVATE)
    chamfer2_piece_5b = split(chamfer2_piece_5b, bisect_by=Plane(origin=(912.5, 1084.39239505, -24.399204817), z_dir=(1, 0, 0)), keep=Keep.TOP, mode=Mode.PRIVATE)
    chamfer2_piece_5 = chamfer2_piece_5a & chamfer2_piece_5b
    add(chamfer2_piece_5, mode=Mode.SUBTRACT)
    with BuildSketch(Plane(origin=(912.5, 1080, -25), x_dir=(0, -0.1907987049962236, 0.9816291836389973), z_dir=(-1, 0, 0))) as chamfer2_piece_6a_section:
        Polygon((CHAMFER2_SIZE * 0.981629183493, CHAMFER2_SIZE * 0.190798704968), (-CHAMFER2_SIZE_2 * 0.190798704996, CHAMFER2_SIZE_2 * 0.981629183639), (0, 0), align=None)
    chamfer2_piece_6a = extrude(amount=1856.178793389, mode=Mode.PRIVATE)
    chamfer2_piece_6a = split(chamfer2_piece_6a, bisect_by=Plane(origin=(-928.089396695, 1084.39239505, -23), z_dir=(0, 0, -1)), keep=Keep.TOP, mode=Mode.PRIVATE)
    chamfer2_piece_6a = split(chamfer2_piece_6a, bisect_by=Plane(origin=(-912.5, 1084.39239505, -24.399204817), z_dir=(-1, 0, 0)), keep=Keep.TOP, mode=Mode.PRIVATE)
    with BuildSketch(Plane(origin=(-912.5, 1111.178793389, -25), x_dir=(0.1907987049962236, 0, 0.9816291836389973), z_dir=(0, -1, 0))) as chamfer2_piece_6b_section:
        Polygon((CHAMFER2_SIZE * 0.981629183493, CHAMFER2_SIZE * 0.190798704968), (-CHAMFER2_SIZE_2 * 0.190798704996, CHAMFER2_SIZE_2 * 0.981629183639), (0, 0), align=None)
    chamfer2_piece_6b = extrude(amount=2191.178793389, mode=Mode.PRIVATE)
    chamfer2_piece_6b = split(chamfer2_piece_6b, bisect_by=Plane(origin=(-916.89239505, 1095.589396695, -23), z_dir=(0, 0, -1)), keep=Keep.TOP, mode=Mode.PRIVATE)
    chamfer2_piece_6b = split(chamfer2_piece_6b, bisect_by=Plane(origin=(-916.89239505, 1080, -24.399204817), z_dir=(0, 1, 0)), keep=Keep.TOP, mode=Mode.PRIVATE)
    chamfer2_piece_6 = chamfer2_piece_6a & chamfer2_piece_6b
    add(chamfer2_piece_6, mode=Mode.SUBTRACT)
    with BuildSketch(Plane(origin=(912.5, -1111.178793389, -25), x_dir=(-0.1907987049962236, 0, 0.9816291836389973), z_dir=(0, 1, 0))) as chamfer2_piece_7a_section:
        Polygon((CHAMFER2_SIZE * 0.981629183493, CHAMFER2_SIZE * 0.190798704968), (-CHAMFER2_SIZE_2 * 0.190798704996, CHAMFER2_SIZE_2 * 0.981629183639), (0, 0), align=None)
    chamfer2_piece_7a = extrude(amount=2191.178793389, mode=Mode.PRIVATE)
    chamfer2_piece_7a = split(chamfer2_piece_7a, bisect_by=Plane(origin=(916.89239505, -1095.589396695, -23), z_dir=(0, 0, -1)), keep=Keep.TOP, mode=Mode.PRIVATE)
    chamfer2_piece_7a = split(chamfer2_piece_7a, bisect_by=Plane(origin=(916.89239505, -1080, -24.399204817), z_dir=(0, -1, 0)), keep=Keep.TOP, mode=Mode.PRIVATE)
    with BuildSketch(Plane(origin=(-912.5, -1080, -25), x_dir=(0, 0.1907987049962236, 0.9816291836389973), z_dir=(1, 0, 0))) as chamfer2_piece_7b_section:
        Polygon((CHAMFER2_SIZE * 0.981629183493, CHAMFER2_SIZE * 0.190798704968), (-CHAMFER2_SIZE_2 * 0.190798704996, CHAMFER2_SIZE_2 * 0.981629183639), (0, 0), align=None)
    chamfer2_piece_7b = extrude(amount=1856.178793389, mode=Mode.PRIVATE)
    chamfer2_piece_7b = split(chamfer2_piece_7b, bisect_by=Plane(origin=(928.089396695, -1084.39239505, -23), z_dir=(0, 0, -1)), keep=Keep.TOP, mode=Mode.PRIVATE)
    chamfer2_piece_7b = split(chamfer2_piece_7b, bisect_by=Plane(origin=(912.5, -1084.39239505, -24.399204817), z_dir=(1, 0, 0)), keep=Keep.TOP, mode=Mode.PRIVATE)
    chamfer2_piece_7 = chamfer2_piece_7a & chamfer2_piece_7b
    add(chamfer2_piece_7, mode=Mode.SUBTRACT)
    with BuildSketch(Plane(origin=(-943.678793389, -1080, -25), x_dir=(0, 0.1907987049962236, 0.9816291836389973), z_dir=(1, 0, 0))) as chamfer2_piece_8a_section:
        Polygon((CHAMFER2_SIZE * 0.981629183493, CHAMFER2_SIZE * 0.190798704968), (-CHAMFER2_SIZE_2 * 0.190798704996, CHAMFER2_SIZE_2 * 0.981629183639), (0, 0), align=None)
    chamfer2_piece_8a = extrude(amount=1856.178793389, mode=Mode.PRIVATE)
    chamfer2_piece_8a = split(chamfer2_piece_8a, bisect_by=Plane(origin=(-928.089396695, -1084.39239505, -23), z_dir=(0, 0, -1)), keep=Keep.TOP, mode=Mode.PRIVATE)
    chamfer2_piece_8a = split(chamfer2_piece_8a, bisect_by=Plane(origin=(-912.5, -1084.39239505, -24.399204817), z_dir=(-1, 0, 0)), keep=Keep.TOP, mode=Mode.PRIVATE)
    with BuildSketch(Plane(origin=(-912.5, 1080, -25), x_dir=(0.1907987049962236, 0, 0.9816291836389973), z_dir=(0, -1, 0))) as chamfer2_piece_8b_section:
        Polygon((CHAMFER2_SIZE * 0.981629183493, CHAMFER2_SIZE * 0.190798704968), (-CHAMFER2_SIZE_2 * 0.190798704996, CHAMFER2_SIZE_2 * 0.981629183639), (0, 0), align=None)
    chamfer2_piece_8b = extrude(amount=2191.178793389, mode=Mode.PRIVATE)
    chamfer2_piece_8b = split(chamfer2_piece_8b, bisect_by=Plane(origin=(-916.89239505, -1095.589396695, -23), z_dir=(0, 0, -1)), keep=Keep.TOP, mode=Mode.PRIVATE)
    chamfer2_piece_8b = split(chamfer2_piece_8b, bisect_by=Plane(origin=(-916.89239505, -1080, -24.399204817), z_dir=(0, -1, 0)), keep=Keep.TOP, mode=Mode.PRIVATE)
    chamfer2_piece_8 = chamfer2_piece_8a & chamfer2_piece_8b
    add(chamfer2_piece_8, mode=Mode.SUBTRACT)

    # Sketch5 → Cut-Extrude5 (cut)
    with BuildSketch(Plane.XZ.offset(1102.5)):
        Rectangle(SKETCH5_W, SKETCH5_H)
    extrude(amount=-CUT_EXTRUDE5_DEPTH, mode=Mode.SUBTRACT)


solid = part.part
